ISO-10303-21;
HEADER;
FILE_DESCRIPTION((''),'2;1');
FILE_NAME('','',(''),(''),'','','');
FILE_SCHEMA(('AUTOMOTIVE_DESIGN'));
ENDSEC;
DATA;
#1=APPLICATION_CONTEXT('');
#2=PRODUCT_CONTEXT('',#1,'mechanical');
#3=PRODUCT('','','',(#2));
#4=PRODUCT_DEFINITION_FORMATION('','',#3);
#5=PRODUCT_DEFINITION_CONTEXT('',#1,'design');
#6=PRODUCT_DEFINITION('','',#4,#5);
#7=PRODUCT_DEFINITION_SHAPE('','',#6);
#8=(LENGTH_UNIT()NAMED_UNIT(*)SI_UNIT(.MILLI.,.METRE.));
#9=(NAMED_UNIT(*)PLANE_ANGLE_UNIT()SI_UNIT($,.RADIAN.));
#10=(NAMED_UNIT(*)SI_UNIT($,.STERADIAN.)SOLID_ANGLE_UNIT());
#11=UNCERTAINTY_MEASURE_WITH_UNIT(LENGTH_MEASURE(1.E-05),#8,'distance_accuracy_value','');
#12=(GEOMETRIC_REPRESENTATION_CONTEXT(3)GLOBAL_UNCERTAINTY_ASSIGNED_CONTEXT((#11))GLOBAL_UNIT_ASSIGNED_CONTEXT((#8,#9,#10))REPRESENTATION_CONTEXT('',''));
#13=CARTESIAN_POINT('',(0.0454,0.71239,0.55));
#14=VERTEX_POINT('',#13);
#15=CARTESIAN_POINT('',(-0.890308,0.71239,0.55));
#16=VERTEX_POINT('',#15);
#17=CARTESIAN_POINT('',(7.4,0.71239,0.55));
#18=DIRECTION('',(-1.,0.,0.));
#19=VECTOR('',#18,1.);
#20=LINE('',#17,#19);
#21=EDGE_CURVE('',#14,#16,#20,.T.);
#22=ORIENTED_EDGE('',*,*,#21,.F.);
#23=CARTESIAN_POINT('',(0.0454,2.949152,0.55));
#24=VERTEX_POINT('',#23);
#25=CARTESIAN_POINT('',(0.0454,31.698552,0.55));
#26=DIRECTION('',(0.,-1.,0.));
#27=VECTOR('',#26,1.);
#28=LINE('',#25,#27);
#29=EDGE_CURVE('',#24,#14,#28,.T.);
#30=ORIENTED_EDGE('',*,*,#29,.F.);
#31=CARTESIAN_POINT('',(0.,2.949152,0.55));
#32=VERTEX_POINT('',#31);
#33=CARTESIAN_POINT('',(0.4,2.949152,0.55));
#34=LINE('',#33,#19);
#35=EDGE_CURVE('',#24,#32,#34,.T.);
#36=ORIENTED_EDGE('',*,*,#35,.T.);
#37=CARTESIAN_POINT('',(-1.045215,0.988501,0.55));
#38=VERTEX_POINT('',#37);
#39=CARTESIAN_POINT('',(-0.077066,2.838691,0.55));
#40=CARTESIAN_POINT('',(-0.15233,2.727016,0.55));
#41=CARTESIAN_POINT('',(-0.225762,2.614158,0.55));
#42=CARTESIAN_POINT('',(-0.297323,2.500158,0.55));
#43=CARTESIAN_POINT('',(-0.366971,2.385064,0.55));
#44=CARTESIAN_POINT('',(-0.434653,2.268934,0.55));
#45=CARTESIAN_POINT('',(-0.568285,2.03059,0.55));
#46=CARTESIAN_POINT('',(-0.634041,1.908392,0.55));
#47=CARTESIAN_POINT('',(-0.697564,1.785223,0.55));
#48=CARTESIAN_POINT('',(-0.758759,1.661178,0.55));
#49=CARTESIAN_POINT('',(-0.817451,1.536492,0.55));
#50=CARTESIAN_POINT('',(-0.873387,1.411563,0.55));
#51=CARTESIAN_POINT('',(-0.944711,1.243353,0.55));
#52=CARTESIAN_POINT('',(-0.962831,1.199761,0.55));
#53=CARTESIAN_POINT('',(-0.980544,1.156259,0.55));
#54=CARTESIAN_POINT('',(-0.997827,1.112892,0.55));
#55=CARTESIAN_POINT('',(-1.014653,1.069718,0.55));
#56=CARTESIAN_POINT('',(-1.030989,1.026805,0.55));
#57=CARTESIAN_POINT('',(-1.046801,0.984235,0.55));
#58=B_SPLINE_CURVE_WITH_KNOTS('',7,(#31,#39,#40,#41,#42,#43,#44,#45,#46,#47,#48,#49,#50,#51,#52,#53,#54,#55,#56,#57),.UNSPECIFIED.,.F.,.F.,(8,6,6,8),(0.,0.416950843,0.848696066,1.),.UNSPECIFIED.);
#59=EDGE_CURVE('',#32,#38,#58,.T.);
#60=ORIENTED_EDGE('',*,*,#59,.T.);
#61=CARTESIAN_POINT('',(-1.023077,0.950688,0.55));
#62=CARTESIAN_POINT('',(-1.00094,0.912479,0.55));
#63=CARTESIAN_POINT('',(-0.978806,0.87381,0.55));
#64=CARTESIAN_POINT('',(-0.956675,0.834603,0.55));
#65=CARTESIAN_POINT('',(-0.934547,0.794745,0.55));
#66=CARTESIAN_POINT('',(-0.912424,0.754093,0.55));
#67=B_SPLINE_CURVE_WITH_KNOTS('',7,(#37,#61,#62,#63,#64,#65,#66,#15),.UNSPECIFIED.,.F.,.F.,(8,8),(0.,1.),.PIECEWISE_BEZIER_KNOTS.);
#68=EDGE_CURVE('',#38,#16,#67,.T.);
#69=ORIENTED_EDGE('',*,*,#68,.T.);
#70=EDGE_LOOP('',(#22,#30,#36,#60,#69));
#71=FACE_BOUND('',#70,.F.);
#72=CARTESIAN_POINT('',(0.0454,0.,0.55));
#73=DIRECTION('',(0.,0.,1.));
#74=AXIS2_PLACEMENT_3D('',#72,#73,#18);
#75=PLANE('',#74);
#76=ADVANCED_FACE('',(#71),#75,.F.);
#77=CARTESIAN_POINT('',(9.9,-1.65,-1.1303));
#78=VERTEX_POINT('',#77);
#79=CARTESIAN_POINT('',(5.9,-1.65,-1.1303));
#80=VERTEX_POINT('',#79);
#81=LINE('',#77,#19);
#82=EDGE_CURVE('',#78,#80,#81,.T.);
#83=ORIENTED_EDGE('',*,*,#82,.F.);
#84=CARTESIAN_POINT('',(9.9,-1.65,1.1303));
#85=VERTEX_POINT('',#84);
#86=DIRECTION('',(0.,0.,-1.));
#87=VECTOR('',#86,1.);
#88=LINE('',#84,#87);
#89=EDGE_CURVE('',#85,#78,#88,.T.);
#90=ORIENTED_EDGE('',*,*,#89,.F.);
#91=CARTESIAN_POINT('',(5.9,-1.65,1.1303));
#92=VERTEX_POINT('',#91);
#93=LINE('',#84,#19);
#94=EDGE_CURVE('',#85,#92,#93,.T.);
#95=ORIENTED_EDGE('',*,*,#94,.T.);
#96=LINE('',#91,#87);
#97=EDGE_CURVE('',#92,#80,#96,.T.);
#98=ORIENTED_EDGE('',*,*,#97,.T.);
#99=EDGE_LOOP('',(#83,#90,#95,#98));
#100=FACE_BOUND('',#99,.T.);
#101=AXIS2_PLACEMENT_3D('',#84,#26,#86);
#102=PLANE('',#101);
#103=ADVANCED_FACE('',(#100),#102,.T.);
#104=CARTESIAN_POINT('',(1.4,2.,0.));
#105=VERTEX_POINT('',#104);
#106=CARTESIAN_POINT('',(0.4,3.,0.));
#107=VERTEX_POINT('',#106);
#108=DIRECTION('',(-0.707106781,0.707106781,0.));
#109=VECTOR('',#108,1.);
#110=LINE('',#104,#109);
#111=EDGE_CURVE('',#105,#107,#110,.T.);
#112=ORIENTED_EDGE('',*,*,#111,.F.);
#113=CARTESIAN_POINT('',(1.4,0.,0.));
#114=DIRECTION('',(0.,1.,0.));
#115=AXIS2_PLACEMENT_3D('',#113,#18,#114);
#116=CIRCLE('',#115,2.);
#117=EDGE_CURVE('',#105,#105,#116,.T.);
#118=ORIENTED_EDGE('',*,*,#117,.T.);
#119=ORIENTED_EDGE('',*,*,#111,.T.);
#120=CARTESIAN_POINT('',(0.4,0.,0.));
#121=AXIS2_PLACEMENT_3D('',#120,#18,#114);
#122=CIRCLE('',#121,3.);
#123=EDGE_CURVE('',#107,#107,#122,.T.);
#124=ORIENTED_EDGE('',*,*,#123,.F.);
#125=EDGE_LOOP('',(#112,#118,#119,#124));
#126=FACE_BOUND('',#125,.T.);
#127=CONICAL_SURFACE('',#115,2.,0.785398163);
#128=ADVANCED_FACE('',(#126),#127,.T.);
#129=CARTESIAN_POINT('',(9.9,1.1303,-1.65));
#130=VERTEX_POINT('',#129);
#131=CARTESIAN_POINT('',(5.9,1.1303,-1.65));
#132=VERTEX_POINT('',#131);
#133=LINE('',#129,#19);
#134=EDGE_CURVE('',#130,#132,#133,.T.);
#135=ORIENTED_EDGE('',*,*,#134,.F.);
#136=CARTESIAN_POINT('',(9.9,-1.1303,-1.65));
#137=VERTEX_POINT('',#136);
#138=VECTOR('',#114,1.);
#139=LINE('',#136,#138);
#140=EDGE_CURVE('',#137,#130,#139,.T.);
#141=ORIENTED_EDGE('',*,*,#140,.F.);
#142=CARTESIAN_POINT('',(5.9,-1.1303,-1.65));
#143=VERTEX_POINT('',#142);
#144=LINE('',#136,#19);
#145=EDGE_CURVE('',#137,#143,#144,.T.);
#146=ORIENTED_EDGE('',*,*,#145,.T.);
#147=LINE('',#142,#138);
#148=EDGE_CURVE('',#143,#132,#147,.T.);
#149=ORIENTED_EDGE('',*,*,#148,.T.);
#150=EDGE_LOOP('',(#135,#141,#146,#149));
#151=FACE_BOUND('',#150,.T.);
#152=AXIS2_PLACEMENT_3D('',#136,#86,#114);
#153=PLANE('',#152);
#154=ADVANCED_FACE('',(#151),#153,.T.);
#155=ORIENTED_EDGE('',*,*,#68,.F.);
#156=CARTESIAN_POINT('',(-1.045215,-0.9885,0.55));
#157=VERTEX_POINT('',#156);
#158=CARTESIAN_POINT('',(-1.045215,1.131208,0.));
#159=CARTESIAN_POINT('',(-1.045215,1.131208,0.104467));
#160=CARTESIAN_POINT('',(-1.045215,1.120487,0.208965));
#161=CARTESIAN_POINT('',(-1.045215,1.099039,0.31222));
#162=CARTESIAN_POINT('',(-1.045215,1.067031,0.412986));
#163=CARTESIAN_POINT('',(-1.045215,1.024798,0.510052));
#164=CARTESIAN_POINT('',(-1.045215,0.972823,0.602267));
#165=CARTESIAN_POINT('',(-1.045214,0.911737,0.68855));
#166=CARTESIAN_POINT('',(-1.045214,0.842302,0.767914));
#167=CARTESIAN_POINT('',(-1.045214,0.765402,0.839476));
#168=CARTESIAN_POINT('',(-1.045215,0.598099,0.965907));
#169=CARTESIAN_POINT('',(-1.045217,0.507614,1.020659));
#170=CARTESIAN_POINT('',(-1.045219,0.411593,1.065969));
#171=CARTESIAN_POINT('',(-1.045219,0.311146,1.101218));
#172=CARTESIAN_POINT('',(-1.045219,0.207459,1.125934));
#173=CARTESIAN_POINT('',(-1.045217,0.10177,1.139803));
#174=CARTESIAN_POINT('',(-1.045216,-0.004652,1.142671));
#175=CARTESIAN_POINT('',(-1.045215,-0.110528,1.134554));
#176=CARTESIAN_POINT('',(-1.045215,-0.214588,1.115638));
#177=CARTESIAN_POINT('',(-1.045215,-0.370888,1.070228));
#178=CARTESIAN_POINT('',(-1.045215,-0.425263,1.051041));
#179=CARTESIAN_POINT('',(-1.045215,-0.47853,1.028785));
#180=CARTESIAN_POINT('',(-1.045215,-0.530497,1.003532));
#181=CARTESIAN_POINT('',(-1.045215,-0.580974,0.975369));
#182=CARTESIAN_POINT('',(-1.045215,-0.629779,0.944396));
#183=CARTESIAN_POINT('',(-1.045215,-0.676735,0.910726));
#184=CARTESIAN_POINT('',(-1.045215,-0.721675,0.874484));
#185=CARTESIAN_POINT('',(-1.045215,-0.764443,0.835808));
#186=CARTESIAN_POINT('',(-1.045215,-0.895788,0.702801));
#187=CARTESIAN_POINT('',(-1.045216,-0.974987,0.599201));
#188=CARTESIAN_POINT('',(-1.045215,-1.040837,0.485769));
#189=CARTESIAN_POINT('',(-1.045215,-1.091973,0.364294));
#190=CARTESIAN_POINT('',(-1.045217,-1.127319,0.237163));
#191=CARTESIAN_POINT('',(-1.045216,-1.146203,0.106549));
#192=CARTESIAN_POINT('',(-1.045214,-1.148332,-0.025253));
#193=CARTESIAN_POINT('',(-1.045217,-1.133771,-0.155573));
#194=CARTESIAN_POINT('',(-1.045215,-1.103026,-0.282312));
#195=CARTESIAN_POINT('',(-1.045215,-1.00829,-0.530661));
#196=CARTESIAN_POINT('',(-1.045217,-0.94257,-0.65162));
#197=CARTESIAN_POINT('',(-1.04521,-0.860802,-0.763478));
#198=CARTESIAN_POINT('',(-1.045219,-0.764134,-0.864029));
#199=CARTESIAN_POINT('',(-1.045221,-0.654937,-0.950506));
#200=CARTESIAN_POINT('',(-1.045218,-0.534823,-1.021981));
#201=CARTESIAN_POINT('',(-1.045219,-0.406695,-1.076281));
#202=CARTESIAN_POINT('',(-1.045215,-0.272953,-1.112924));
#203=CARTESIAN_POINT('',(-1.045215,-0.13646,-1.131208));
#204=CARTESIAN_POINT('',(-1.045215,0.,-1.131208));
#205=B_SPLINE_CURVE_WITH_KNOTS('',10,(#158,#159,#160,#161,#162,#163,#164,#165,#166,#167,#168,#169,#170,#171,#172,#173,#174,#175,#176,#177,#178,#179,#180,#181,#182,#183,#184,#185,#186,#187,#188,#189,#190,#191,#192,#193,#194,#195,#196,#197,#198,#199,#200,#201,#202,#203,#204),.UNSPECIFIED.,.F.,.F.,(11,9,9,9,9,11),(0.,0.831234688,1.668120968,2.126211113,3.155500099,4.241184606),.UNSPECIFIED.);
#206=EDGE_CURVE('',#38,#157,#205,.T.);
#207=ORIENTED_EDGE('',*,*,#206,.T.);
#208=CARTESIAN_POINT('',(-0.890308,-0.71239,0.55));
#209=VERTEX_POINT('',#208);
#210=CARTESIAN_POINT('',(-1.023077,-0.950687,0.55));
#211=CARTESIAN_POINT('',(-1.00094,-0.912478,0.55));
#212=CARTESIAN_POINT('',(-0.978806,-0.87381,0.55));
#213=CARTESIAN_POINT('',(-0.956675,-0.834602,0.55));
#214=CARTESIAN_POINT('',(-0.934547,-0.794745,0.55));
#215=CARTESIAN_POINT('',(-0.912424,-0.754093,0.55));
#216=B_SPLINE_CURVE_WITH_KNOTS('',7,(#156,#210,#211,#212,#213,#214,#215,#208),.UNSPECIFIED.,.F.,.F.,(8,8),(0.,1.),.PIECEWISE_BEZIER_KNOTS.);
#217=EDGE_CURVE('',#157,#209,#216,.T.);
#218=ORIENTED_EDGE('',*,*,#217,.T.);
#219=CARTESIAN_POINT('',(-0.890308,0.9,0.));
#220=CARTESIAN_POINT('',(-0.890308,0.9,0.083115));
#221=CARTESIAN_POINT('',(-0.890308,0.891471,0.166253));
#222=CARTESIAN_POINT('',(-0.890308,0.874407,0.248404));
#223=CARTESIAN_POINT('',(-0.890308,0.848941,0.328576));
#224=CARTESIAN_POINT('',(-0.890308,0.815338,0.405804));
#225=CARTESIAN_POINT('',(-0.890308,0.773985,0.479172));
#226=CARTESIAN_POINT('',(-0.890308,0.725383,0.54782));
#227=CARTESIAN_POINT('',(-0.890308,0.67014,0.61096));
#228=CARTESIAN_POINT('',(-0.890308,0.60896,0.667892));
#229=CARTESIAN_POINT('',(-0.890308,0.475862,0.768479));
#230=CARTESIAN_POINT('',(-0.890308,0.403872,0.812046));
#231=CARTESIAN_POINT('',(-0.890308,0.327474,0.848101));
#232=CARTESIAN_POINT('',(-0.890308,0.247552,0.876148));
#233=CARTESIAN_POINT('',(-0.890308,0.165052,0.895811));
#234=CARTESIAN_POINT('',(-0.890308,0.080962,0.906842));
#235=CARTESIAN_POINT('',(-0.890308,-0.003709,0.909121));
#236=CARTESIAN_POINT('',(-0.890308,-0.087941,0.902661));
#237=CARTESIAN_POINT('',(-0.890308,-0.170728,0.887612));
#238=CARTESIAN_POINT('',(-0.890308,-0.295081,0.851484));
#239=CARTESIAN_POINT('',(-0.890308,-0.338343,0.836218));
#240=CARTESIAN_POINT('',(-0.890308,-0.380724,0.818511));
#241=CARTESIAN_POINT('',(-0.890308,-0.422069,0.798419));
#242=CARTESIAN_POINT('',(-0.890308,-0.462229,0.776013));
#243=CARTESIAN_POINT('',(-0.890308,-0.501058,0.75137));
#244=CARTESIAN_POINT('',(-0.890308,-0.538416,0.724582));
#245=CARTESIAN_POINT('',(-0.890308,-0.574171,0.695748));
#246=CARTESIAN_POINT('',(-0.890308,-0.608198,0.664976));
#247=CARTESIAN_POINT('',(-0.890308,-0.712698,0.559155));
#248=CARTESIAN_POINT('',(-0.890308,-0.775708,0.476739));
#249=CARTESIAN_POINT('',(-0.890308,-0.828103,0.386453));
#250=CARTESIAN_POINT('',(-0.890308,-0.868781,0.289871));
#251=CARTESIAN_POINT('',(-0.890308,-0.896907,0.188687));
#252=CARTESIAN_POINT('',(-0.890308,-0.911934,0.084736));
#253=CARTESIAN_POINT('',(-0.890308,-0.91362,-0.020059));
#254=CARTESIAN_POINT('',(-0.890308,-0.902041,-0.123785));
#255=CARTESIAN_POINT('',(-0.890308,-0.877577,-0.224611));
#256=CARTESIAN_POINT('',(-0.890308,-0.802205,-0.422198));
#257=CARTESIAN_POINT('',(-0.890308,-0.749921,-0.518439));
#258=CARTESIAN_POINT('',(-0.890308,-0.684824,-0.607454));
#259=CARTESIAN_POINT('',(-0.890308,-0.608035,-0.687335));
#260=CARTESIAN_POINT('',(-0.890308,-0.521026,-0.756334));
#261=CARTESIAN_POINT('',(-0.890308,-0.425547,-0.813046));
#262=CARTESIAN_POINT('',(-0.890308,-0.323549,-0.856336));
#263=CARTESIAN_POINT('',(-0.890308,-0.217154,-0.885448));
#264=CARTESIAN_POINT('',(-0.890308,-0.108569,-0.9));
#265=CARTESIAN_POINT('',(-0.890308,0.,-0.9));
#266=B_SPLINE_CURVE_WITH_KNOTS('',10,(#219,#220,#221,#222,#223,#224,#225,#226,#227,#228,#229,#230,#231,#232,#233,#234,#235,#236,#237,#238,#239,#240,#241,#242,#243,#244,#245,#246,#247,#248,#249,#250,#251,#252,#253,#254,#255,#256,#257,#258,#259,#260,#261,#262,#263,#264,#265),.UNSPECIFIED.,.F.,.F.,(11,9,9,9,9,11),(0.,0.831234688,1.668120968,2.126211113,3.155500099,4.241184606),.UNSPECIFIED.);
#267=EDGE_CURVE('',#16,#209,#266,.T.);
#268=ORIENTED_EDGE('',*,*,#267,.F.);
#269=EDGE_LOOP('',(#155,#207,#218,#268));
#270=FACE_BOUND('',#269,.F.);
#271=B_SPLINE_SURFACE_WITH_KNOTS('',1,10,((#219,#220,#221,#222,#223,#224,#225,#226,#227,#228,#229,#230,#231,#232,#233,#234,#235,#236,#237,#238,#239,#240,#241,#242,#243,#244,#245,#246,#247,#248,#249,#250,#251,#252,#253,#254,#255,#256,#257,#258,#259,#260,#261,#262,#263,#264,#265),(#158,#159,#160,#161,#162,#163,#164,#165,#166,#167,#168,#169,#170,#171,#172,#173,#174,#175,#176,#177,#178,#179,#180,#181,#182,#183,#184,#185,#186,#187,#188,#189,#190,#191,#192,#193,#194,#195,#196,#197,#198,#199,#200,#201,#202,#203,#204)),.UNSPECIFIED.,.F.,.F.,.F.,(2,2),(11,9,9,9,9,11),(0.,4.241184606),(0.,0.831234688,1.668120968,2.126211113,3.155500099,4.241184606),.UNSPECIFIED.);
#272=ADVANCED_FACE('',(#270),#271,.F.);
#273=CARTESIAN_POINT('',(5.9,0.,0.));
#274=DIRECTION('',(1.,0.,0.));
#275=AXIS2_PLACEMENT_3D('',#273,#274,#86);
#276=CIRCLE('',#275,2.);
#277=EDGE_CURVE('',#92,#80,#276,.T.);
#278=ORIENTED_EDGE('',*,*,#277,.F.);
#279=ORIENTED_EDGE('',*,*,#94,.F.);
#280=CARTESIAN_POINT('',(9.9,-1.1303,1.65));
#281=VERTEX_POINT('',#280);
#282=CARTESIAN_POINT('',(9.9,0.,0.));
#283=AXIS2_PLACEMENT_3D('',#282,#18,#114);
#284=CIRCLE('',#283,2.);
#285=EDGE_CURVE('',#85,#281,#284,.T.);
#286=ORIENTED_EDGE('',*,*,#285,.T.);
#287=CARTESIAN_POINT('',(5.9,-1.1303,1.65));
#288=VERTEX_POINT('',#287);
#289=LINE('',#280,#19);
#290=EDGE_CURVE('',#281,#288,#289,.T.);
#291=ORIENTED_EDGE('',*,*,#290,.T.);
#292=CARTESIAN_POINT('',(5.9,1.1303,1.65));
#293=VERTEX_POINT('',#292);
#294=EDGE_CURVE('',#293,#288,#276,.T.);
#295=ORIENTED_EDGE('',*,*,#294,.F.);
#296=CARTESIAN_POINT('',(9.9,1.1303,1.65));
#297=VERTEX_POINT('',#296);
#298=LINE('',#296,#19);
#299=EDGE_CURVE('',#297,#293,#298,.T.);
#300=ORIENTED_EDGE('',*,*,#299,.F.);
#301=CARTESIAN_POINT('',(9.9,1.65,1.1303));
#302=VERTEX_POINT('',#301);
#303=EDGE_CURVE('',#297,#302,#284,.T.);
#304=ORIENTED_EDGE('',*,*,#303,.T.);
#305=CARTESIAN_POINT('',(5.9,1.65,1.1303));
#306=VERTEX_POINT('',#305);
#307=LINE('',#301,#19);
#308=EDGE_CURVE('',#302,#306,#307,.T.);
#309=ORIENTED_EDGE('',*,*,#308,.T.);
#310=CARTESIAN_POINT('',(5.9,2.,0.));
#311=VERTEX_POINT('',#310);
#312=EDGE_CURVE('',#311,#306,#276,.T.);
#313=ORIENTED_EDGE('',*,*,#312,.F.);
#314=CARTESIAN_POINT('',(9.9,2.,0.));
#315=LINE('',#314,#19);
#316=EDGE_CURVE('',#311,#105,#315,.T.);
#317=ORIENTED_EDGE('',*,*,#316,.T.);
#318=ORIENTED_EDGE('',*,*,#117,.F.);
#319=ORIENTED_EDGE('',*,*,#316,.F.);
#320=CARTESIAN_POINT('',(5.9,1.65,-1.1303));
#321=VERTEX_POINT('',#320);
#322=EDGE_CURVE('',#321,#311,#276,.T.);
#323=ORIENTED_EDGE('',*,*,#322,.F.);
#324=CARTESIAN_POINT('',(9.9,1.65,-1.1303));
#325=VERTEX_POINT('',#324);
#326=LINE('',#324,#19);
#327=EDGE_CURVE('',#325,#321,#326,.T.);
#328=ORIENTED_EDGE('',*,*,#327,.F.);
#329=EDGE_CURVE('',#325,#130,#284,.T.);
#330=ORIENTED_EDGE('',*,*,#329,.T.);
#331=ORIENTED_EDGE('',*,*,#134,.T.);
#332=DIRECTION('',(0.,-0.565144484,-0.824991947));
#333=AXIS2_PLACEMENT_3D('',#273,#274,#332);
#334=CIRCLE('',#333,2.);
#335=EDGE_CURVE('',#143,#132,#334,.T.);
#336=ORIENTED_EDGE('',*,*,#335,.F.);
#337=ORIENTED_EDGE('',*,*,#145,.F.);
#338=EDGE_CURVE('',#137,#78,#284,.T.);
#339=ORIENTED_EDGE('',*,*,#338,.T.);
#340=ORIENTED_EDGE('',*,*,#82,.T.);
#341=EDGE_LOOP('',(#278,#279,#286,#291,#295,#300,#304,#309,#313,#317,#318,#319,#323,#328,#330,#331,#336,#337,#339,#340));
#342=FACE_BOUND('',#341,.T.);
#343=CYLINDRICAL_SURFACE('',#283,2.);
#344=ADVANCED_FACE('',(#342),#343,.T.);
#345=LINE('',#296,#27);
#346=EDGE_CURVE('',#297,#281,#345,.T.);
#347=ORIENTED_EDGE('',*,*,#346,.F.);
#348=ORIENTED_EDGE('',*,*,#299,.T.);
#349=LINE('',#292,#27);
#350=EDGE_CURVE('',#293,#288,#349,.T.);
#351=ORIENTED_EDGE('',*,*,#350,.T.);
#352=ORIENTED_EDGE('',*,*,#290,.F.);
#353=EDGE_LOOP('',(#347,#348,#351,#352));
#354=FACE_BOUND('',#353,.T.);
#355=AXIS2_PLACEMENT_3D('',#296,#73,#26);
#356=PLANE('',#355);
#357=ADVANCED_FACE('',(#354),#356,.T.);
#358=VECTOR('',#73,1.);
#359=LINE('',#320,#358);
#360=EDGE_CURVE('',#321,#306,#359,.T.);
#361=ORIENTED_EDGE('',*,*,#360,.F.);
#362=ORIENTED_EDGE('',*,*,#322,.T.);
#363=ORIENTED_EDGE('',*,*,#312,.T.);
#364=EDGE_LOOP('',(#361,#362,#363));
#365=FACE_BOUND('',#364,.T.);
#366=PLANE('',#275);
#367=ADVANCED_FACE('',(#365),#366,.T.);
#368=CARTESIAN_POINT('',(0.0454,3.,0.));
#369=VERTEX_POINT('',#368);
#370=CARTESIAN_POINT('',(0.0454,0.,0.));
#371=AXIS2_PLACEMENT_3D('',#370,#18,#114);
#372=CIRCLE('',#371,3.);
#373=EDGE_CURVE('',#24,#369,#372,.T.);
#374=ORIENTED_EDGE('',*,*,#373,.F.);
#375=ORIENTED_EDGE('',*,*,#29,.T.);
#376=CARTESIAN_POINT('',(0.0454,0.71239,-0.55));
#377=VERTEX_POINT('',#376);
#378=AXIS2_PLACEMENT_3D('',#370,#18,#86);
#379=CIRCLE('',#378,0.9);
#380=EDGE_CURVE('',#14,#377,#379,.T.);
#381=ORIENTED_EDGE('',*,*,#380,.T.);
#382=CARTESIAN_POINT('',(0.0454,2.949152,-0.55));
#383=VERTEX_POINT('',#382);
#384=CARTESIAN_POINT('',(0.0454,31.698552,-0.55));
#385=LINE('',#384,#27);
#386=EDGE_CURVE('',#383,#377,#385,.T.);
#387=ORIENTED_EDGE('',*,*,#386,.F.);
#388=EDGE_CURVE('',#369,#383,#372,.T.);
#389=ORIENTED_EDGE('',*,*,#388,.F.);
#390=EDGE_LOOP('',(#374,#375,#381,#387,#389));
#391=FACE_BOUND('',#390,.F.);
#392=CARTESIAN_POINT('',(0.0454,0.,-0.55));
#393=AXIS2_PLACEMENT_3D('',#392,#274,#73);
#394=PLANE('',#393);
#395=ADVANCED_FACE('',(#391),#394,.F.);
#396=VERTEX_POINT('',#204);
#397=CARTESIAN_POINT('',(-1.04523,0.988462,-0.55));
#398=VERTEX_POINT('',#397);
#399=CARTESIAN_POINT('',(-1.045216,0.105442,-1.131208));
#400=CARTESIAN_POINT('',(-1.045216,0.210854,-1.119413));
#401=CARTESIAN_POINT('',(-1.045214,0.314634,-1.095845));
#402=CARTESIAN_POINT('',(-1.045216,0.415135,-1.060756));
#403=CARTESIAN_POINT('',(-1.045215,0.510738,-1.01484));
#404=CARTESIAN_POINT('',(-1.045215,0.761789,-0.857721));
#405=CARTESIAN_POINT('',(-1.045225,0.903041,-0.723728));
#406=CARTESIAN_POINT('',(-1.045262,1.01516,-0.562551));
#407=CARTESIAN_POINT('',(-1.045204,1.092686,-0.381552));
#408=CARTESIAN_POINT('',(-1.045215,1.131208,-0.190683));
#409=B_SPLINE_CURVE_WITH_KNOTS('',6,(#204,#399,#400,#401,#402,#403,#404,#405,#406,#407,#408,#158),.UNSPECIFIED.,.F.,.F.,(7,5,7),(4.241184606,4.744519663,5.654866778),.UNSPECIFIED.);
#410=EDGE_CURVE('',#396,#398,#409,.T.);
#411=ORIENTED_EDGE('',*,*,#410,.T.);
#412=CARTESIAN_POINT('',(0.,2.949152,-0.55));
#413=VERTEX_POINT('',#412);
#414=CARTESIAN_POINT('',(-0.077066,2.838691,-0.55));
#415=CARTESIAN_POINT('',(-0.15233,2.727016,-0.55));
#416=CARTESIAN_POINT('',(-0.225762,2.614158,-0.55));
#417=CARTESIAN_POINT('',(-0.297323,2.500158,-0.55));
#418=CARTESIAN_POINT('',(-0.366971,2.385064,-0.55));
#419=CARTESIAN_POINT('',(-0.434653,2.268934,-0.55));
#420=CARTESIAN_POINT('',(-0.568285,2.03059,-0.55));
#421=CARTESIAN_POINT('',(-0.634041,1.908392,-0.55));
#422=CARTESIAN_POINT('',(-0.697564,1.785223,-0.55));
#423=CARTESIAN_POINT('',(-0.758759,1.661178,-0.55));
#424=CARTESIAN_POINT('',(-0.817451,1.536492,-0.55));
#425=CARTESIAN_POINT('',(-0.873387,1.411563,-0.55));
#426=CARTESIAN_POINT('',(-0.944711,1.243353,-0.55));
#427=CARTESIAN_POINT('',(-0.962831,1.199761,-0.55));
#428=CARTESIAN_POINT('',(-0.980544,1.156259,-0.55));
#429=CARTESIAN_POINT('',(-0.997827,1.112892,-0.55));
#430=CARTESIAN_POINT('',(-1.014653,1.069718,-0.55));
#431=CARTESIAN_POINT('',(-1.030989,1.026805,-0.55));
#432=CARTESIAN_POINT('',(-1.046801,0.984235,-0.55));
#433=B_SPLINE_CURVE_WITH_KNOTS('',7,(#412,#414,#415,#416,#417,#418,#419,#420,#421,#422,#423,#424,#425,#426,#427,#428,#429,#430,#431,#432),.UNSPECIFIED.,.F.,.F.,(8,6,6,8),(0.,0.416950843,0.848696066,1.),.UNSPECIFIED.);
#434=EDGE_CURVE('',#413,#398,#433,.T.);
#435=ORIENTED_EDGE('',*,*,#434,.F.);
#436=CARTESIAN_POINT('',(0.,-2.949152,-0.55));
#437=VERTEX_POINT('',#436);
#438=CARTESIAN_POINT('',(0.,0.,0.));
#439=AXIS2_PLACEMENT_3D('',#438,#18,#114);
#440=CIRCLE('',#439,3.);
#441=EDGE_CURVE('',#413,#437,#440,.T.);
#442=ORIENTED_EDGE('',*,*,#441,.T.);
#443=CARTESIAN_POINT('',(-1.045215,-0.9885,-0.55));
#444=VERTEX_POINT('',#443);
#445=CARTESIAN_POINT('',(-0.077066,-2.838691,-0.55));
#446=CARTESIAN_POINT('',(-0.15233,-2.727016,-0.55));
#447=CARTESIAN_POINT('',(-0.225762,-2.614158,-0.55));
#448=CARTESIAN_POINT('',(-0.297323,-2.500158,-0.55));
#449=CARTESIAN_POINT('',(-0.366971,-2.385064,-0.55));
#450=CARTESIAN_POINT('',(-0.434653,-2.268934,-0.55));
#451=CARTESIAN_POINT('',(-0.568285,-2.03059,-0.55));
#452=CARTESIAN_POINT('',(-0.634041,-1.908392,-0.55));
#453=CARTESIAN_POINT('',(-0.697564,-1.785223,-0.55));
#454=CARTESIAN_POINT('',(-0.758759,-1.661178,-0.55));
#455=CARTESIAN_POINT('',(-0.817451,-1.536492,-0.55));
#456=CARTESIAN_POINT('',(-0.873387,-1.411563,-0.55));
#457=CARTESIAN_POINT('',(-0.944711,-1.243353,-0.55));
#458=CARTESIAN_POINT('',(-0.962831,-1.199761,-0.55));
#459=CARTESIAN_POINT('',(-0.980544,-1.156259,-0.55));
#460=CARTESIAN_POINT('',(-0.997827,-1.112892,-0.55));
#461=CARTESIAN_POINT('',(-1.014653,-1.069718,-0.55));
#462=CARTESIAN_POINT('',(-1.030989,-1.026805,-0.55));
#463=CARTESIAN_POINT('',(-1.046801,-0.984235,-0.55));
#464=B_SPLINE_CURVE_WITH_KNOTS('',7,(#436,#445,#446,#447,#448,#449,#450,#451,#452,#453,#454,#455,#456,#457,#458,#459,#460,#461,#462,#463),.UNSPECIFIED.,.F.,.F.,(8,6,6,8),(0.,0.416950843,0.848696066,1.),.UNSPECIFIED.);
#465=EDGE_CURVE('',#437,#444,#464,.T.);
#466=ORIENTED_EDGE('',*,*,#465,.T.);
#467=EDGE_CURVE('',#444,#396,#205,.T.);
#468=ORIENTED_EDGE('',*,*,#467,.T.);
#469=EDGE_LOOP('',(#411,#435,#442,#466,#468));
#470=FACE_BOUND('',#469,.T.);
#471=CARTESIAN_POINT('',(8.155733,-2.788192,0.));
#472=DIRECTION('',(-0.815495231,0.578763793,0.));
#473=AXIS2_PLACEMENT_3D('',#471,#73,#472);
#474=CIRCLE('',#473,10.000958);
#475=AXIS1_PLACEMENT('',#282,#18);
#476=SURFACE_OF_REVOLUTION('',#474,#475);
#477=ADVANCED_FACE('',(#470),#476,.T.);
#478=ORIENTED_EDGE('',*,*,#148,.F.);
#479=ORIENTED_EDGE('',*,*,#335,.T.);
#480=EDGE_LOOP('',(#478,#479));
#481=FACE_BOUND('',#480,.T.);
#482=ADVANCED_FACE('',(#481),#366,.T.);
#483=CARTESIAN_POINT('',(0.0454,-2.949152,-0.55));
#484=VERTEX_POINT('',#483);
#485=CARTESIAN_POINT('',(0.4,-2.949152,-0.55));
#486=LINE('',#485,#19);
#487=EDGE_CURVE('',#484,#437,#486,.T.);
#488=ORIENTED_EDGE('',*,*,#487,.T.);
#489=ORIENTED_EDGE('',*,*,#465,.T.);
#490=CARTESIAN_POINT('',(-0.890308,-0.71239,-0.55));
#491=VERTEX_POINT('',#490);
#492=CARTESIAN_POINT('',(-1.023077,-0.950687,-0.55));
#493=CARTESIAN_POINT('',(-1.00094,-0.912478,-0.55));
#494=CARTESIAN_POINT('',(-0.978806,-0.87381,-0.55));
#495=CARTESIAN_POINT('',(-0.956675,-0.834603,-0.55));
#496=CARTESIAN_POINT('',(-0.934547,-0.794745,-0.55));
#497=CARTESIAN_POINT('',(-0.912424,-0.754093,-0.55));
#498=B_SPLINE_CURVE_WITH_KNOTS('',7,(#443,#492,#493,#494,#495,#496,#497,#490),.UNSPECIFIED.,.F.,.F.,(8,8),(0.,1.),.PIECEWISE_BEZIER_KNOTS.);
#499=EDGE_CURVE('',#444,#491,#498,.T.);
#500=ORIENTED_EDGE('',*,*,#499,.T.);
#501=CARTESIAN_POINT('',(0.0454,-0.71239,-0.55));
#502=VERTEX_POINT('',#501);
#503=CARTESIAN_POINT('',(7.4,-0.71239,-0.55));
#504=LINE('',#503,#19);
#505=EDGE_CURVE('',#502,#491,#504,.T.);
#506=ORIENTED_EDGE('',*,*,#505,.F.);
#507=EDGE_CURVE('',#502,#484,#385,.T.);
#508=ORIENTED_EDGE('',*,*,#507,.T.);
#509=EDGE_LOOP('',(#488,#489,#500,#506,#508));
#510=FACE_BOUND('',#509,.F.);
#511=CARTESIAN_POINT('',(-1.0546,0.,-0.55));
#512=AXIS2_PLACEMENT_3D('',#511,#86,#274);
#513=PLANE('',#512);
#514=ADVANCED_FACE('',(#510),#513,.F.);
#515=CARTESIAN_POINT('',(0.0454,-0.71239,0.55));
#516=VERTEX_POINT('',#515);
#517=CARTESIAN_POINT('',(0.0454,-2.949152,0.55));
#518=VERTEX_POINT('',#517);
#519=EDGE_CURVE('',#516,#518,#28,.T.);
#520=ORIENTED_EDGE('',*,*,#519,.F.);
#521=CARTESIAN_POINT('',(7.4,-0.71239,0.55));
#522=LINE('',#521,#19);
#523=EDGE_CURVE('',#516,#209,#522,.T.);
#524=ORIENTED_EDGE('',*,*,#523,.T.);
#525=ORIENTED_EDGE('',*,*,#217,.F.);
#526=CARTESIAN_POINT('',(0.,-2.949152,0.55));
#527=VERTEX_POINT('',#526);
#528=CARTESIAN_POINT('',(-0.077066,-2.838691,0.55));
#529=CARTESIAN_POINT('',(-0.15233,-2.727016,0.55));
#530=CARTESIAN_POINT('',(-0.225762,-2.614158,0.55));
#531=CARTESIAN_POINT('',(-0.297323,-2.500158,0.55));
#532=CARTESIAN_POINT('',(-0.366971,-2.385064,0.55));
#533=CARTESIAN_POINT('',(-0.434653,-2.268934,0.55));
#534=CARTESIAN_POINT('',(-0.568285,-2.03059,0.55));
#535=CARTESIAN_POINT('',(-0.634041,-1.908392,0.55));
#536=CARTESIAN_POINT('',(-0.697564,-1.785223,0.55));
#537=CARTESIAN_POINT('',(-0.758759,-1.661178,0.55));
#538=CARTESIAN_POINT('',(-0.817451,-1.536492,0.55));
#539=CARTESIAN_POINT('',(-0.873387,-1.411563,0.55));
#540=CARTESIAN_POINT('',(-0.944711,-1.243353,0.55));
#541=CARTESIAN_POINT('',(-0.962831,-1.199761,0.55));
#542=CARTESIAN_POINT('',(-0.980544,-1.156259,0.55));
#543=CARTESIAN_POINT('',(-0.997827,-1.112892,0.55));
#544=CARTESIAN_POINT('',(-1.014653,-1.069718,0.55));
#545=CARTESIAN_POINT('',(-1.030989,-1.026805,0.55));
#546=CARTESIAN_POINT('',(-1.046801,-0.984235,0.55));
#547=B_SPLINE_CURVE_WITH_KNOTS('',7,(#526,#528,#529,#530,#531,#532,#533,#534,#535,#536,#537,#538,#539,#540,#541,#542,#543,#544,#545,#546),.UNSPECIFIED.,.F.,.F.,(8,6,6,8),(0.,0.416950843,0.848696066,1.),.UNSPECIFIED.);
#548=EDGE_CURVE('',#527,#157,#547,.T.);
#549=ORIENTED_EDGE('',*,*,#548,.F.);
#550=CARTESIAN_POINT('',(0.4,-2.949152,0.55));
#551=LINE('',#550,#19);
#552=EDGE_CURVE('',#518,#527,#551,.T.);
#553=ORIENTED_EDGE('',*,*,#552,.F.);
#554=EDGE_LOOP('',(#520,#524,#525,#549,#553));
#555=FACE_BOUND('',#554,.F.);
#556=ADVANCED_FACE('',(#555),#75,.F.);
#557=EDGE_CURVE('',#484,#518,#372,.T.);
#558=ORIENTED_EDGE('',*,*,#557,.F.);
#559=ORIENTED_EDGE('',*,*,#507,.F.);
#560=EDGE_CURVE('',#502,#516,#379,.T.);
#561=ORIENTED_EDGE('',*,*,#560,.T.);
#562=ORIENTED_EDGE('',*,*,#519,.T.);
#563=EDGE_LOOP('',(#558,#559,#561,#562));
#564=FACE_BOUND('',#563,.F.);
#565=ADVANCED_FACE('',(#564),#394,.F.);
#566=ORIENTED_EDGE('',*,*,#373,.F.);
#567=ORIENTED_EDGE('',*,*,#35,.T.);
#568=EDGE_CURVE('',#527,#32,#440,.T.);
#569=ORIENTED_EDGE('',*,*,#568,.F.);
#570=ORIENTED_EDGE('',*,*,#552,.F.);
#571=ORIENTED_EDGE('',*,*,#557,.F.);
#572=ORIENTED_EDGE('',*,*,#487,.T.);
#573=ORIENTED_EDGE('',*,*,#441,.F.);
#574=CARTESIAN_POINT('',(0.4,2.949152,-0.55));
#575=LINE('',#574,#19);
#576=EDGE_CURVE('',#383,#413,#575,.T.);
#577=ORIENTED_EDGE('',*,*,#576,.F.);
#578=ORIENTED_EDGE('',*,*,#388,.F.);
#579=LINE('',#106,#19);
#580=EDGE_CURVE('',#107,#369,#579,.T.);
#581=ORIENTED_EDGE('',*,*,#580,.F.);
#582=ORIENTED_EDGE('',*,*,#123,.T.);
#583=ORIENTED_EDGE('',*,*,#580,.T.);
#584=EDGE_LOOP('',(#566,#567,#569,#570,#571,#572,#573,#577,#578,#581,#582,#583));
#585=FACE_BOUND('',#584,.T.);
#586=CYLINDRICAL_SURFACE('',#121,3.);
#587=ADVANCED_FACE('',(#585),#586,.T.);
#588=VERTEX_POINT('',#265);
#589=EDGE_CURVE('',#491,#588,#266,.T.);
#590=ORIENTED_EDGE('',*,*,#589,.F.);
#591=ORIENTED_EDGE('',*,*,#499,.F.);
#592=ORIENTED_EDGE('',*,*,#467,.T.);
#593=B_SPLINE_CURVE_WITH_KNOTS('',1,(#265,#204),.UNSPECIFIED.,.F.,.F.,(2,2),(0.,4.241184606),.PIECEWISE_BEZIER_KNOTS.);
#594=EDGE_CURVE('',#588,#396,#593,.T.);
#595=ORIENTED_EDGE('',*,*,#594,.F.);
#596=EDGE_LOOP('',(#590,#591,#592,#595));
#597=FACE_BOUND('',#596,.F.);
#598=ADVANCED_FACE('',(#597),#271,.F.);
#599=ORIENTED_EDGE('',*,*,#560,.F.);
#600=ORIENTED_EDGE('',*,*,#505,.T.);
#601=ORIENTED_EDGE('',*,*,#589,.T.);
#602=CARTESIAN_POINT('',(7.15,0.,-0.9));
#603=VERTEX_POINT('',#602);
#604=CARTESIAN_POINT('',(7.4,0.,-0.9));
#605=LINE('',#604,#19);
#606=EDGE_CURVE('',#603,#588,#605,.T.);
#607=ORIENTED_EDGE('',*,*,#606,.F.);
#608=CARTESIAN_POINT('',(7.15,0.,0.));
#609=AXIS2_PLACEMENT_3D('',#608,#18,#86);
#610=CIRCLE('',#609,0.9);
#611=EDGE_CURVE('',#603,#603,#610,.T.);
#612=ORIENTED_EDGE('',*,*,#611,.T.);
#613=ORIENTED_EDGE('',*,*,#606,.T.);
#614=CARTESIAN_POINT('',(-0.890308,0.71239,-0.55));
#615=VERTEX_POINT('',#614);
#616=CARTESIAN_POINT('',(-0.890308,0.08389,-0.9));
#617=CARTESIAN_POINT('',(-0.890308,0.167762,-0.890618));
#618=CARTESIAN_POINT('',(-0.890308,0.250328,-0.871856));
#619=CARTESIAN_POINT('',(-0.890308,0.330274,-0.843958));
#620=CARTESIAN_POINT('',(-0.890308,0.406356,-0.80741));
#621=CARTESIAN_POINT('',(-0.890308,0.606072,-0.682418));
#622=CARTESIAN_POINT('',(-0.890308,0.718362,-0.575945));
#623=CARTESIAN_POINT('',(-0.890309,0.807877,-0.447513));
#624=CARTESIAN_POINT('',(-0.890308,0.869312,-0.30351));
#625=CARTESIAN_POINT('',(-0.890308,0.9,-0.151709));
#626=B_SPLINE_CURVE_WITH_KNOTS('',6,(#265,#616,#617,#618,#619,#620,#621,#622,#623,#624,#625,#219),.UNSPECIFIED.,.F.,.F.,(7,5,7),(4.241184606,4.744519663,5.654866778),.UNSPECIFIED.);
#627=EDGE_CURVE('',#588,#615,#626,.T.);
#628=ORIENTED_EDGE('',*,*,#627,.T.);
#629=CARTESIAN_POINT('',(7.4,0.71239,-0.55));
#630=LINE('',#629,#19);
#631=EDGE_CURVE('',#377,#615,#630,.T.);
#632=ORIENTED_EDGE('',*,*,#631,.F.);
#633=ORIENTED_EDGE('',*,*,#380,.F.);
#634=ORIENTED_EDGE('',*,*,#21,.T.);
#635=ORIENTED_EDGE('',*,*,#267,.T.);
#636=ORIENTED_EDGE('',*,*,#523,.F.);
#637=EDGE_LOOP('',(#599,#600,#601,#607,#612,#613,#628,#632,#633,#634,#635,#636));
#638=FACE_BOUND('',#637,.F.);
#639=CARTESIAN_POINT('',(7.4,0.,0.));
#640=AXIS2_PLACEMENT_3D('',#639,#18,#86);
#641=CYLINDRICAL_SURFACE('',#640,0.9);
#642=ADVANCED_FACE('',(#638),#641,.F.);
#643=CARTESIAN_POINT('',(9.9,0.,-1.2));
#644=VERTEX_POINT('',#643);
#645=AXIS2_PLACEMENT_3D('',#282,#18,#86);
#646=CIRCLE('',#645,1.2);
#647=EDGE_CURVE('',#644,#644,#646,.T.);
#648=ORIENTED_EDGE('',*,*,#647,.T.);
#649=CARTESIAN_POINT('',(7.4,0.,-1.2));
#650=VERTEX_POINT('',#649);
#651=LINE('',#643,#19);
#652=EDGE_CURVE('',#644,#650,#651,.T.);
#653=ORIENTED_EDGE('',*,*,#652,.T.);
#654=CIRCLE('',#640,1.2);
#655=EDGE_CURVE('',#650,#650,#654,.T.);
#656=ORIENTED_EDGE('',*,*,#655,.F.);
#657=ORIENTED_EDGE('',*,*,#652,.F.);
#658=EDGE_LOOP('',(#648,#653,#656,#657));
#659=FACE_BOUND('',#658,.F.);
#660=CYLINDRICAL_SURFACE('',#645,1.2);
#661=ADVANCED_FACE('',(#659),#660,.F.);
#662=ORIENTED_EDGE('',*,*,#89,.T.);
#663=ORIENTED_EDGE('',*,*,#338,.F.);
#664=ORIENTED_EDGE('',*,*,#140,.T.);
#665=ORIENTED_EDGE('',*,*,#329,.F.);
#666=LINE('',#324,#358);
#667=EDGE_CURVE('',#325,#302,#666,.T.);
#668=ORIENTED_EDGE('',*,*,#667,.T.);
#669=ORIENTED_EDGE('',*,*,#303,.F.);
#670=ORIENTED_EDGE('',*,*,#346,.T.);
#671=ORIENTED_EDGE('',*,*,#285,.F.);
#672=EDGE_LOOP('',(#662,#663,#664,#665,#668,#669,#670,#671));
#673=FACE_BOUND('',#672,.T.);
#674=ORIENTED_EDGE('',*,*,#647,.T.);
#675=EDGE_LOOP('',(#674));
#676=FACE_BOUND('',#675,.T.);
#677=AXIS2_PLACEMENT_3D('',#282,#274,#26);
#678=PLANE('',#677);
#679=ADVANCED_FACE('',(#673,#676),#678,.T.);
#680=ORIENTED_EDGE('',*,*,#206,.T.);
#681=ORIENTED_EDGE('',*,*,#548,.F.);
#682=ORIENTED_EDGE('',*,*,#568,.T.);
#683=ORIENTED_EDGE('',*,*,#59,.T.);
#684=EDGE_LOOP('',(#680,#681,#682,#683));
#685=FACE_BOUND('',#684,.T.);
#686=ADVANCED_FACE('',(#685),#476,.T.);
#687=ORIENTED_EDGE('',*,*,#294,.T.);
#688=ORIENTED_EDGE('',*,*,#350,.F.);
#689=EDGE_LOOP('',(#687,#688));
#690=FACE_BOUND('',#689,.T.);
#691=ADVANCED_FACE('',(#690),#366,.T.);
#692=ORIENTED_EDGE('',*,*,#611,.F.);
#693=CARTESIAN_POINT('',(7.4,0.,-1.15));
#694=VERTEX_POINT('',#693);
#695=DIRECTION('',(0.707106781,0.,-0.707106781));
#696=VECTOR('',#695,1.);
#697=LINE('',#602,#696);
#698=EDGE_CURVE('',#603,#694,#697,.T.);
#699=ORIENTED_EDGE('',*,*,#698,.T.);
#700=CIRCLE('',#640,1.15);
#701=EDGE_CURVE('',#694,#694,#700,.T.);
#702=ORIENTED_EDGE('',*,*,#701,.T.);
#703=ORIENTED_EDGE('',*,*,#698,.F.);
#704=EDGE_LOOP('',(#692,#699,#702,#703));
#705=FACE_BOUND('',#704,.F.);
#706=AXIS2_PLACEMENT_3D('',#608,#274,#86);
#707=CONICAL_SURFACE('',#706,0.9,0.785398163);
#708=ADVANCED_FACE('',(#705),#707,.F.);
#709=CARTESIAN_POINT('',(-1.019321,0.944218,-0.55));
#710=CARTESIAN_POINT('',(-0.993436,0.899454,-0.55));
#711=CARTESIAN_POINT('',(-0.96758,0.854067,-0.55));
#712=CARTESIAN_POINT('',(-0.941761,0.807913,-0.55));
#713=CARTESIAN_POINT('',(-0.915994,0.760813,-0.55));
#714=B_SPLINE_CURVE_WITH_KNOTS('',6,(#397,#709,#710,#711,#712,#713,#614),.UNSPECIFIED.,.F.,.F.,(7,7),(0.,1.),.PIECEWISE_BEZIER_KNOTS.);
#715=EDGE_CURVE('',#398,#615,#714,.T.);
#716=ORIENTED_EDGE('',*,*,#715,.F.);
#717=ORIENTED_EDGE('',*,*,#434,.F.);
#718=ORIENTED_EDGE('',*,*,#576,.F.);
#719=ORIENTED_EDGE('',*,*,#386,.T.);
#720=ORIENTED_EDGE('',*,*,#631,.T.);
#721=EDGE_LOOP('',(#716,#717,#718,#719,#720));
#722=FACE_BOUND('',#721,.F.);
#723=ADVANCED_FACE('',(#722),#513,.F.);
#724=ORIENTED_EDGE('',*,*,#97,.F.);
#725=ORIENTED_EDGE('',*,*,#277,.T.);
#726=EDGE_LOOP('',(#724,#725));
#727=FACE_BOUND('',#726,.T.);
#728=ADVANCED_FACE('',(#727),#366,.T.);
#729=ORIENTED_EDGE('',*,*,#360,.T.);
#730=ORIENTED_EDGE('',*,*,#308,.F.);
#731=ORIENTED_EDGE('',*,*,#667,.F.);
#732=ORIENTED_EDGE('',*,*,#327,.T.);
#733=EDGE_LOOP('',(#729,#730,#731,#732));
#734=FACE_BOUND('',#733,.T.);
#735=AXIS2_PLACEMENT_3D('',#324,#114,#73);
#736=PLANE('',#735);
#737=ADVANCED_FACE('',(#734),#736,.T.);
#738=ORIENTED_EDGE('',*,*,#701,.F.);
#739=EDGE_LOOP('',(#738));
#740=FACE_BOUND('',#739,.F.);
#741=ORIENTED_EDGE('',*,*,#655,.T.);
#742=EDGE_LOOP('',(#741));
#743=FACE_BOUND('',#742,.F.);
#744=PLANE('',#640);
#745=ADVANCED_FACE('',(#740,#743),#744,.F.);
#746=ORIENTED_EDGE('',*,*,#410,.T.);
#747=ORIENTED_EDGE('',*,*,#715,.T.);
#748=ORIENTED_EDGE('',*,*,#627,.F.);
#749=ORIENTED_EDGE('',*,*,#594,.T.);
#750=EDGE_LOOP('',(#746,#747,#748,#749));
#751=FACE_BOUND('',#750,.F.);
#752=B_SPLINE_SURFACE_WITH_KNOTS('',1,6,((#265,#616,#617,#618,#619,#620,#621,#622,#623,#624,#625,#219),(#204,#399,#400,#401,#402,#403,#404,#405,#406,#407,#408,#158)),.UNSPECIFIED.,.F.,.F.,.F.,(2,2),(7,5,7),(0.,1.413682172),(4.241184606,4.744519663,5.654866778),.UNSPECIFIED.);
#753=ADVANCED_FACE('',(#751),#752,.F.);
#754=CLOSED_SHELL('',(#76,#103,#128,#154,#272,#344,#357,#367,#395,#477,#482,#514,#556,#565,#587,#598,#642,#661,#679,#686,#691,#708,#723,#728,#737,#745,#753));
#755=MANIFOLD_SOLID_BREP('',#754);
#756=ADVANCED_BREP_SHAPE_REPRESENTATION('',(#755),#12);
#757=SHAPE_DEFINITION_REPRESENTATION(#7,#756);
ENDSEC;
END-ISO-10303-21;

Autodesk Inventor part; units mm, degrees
ref_plane "YZ Plane" through (0, 0, 0) normal (1, 0, 0) x (0, 1, 0)
ref_plane "XZ Plane" through (0, 0, 0) normal (0, 1, 0) x (-1, 0, 0)
ref_plane "XY Plane" through (0, 0, 0) normal (0, 0, 1) x (1, 0, 0)
sketch "Szkic1" plane through (0, 0, 0) normal (0, 0, 1) x (1, 0, 0)
  line L0 (9.9, 0) -> (9.9, 2)
  line L1 (9.9, 2) -> (1.4, 2)
  line L2 (1.4, 2) -> (0.4, 3)
  line L3 (0.4, 3) -> (0, 3)
  arc A0 (0, 3) -> (-1.4487, 0) centre (8.1549, -2.7877) ccw
  line L4 (-1.1, 1) -> (9.9, 1) construction
  line L5 (-1.4487, 0) -> (0, 0)
  line L6 (9.9, 0) -> (0, 0)
  dimension "d1" = 11
  dimension "d2" = 1.1
  dimension "d3" = 10
  dimension "d9" = 2.5
  dimension "d10" = 45
  dimension "d11" = 1
  dimension "d12" = 3
revolve "Obrót1" add sketch "Szkic1" angle 360 about axis through (9.9, 0, 0) along (-1, 0, 0)
sketch "Szkic2" plane through (9.9, 0, 0) normal (1, 0, 0) x (0, 0, -1)
  circle A0 centre (0, 0) radius 2 projected
  line L0 (-1.1303, -1.65) -> (1.1303, -1.65)
  line L1 (1.65, -1.1303) -> (1.65, 1.1303)
  line L2 (1.1303, 1.65) -> (-1.1303, 1.65)
  line L3 (-1.65, 1.1303) -> (-1.65, -1.1303)
  line L4 (-1.65, -1.65) -> (1.65, 1.65) construction
  line L5 (1.65, -1.65) -> (-1.65, 1.65) construction
  dimension "d14" = 3.3
  dimension "d15" = 3.3
extrude "Wyciągnięcie proste2" cut sketch "Szkic2" against normal blind 4 contours A0 L1 | L2 A0 | A0 L0 | L3 A0
sketch "Szkic3" plane through (9.9, -1.1303, -1.65) normal (1, 0, 0) x (0, 0, -1)
  line L0 (-2.7803, -0.5197) -> (-0.5197, -0.5197) projected
  arc A0 (-0.5197, -0.5197) -> (0, 0) centre (-1.65, 1.1303) ccw projected
  line L1 (0, 0) -> (0, 2.2605) projected
  arc A1 (0, 2.2605) -> (-0.5197, 2.7803) centre (-1.65, 1.1303) ccw projected
  line L2 (-0.5197, 2.7803) -> (-2.7803, 2.7803) projected
  arc A2 (-2.7803, 2.7803) -> (-3.3, 2.2605) centre (-1.65, 1.1303) ccw projected
  line L3 (-3.3, 2.2605) -> (-3.3, 0) projected
  arc A3 (-3.3, 0) -> (-2.7803, -0.5197) centre (-1.65, 1.1303) ccw projected
hole "Otwór1" at (9.9, 0, 0) direction (-1, 0, 0) diameter 1.8 end through all counterbore diameter 2.4 counterbore depth 2.5
chamfer "Faza1" distance 0.25 angle 45 1 edges at (7.4, 0, 0.9)
chamfer "Faza2" distance 0.25 angle 45 2 edges at (-1.1403, -0.6363, 0.6365) (-1.1403, 0.6364, -0.6364)
sketch "Szkic5" plane through (0, 0, 0) normal (0, 1, 0) x (-1, 0, 0)
  line L0 (0, 3) -> (0, -3) construction
  line L1 (1.0546, -0.55) -> (-0.0454, -0.55)
  line L2 (-0.0454, -0.55) -> (-0.0454, 0.55)
  line L3 (-0.0454, 0.55) -> (1.0546, 0.55)
  line L4 (1.0546, 0.55) -> (1.0546, -0.55)
  line L5 (1.0546, -0.55) -> (-0.0454, 0.55) construction
  line L6 (-0.0454, -0.55) -> (1.0546, 0.55) construction
  point P0 (0, 0)
  point P1 (0.5046, 0)
  dimension "d33" = 1.1
  dimension "d34" = 1.1
extrude "Wyciągnięcie proste3" cut sketch "Szkic5" along normal through all both and the other way through all
thread "Gwint1" size "M2.5x0.45" class "6H" standard "ANSI Metric M Profile" full length
properties part number "Nypel_szprychy" material "Aluminium AW-7020"
